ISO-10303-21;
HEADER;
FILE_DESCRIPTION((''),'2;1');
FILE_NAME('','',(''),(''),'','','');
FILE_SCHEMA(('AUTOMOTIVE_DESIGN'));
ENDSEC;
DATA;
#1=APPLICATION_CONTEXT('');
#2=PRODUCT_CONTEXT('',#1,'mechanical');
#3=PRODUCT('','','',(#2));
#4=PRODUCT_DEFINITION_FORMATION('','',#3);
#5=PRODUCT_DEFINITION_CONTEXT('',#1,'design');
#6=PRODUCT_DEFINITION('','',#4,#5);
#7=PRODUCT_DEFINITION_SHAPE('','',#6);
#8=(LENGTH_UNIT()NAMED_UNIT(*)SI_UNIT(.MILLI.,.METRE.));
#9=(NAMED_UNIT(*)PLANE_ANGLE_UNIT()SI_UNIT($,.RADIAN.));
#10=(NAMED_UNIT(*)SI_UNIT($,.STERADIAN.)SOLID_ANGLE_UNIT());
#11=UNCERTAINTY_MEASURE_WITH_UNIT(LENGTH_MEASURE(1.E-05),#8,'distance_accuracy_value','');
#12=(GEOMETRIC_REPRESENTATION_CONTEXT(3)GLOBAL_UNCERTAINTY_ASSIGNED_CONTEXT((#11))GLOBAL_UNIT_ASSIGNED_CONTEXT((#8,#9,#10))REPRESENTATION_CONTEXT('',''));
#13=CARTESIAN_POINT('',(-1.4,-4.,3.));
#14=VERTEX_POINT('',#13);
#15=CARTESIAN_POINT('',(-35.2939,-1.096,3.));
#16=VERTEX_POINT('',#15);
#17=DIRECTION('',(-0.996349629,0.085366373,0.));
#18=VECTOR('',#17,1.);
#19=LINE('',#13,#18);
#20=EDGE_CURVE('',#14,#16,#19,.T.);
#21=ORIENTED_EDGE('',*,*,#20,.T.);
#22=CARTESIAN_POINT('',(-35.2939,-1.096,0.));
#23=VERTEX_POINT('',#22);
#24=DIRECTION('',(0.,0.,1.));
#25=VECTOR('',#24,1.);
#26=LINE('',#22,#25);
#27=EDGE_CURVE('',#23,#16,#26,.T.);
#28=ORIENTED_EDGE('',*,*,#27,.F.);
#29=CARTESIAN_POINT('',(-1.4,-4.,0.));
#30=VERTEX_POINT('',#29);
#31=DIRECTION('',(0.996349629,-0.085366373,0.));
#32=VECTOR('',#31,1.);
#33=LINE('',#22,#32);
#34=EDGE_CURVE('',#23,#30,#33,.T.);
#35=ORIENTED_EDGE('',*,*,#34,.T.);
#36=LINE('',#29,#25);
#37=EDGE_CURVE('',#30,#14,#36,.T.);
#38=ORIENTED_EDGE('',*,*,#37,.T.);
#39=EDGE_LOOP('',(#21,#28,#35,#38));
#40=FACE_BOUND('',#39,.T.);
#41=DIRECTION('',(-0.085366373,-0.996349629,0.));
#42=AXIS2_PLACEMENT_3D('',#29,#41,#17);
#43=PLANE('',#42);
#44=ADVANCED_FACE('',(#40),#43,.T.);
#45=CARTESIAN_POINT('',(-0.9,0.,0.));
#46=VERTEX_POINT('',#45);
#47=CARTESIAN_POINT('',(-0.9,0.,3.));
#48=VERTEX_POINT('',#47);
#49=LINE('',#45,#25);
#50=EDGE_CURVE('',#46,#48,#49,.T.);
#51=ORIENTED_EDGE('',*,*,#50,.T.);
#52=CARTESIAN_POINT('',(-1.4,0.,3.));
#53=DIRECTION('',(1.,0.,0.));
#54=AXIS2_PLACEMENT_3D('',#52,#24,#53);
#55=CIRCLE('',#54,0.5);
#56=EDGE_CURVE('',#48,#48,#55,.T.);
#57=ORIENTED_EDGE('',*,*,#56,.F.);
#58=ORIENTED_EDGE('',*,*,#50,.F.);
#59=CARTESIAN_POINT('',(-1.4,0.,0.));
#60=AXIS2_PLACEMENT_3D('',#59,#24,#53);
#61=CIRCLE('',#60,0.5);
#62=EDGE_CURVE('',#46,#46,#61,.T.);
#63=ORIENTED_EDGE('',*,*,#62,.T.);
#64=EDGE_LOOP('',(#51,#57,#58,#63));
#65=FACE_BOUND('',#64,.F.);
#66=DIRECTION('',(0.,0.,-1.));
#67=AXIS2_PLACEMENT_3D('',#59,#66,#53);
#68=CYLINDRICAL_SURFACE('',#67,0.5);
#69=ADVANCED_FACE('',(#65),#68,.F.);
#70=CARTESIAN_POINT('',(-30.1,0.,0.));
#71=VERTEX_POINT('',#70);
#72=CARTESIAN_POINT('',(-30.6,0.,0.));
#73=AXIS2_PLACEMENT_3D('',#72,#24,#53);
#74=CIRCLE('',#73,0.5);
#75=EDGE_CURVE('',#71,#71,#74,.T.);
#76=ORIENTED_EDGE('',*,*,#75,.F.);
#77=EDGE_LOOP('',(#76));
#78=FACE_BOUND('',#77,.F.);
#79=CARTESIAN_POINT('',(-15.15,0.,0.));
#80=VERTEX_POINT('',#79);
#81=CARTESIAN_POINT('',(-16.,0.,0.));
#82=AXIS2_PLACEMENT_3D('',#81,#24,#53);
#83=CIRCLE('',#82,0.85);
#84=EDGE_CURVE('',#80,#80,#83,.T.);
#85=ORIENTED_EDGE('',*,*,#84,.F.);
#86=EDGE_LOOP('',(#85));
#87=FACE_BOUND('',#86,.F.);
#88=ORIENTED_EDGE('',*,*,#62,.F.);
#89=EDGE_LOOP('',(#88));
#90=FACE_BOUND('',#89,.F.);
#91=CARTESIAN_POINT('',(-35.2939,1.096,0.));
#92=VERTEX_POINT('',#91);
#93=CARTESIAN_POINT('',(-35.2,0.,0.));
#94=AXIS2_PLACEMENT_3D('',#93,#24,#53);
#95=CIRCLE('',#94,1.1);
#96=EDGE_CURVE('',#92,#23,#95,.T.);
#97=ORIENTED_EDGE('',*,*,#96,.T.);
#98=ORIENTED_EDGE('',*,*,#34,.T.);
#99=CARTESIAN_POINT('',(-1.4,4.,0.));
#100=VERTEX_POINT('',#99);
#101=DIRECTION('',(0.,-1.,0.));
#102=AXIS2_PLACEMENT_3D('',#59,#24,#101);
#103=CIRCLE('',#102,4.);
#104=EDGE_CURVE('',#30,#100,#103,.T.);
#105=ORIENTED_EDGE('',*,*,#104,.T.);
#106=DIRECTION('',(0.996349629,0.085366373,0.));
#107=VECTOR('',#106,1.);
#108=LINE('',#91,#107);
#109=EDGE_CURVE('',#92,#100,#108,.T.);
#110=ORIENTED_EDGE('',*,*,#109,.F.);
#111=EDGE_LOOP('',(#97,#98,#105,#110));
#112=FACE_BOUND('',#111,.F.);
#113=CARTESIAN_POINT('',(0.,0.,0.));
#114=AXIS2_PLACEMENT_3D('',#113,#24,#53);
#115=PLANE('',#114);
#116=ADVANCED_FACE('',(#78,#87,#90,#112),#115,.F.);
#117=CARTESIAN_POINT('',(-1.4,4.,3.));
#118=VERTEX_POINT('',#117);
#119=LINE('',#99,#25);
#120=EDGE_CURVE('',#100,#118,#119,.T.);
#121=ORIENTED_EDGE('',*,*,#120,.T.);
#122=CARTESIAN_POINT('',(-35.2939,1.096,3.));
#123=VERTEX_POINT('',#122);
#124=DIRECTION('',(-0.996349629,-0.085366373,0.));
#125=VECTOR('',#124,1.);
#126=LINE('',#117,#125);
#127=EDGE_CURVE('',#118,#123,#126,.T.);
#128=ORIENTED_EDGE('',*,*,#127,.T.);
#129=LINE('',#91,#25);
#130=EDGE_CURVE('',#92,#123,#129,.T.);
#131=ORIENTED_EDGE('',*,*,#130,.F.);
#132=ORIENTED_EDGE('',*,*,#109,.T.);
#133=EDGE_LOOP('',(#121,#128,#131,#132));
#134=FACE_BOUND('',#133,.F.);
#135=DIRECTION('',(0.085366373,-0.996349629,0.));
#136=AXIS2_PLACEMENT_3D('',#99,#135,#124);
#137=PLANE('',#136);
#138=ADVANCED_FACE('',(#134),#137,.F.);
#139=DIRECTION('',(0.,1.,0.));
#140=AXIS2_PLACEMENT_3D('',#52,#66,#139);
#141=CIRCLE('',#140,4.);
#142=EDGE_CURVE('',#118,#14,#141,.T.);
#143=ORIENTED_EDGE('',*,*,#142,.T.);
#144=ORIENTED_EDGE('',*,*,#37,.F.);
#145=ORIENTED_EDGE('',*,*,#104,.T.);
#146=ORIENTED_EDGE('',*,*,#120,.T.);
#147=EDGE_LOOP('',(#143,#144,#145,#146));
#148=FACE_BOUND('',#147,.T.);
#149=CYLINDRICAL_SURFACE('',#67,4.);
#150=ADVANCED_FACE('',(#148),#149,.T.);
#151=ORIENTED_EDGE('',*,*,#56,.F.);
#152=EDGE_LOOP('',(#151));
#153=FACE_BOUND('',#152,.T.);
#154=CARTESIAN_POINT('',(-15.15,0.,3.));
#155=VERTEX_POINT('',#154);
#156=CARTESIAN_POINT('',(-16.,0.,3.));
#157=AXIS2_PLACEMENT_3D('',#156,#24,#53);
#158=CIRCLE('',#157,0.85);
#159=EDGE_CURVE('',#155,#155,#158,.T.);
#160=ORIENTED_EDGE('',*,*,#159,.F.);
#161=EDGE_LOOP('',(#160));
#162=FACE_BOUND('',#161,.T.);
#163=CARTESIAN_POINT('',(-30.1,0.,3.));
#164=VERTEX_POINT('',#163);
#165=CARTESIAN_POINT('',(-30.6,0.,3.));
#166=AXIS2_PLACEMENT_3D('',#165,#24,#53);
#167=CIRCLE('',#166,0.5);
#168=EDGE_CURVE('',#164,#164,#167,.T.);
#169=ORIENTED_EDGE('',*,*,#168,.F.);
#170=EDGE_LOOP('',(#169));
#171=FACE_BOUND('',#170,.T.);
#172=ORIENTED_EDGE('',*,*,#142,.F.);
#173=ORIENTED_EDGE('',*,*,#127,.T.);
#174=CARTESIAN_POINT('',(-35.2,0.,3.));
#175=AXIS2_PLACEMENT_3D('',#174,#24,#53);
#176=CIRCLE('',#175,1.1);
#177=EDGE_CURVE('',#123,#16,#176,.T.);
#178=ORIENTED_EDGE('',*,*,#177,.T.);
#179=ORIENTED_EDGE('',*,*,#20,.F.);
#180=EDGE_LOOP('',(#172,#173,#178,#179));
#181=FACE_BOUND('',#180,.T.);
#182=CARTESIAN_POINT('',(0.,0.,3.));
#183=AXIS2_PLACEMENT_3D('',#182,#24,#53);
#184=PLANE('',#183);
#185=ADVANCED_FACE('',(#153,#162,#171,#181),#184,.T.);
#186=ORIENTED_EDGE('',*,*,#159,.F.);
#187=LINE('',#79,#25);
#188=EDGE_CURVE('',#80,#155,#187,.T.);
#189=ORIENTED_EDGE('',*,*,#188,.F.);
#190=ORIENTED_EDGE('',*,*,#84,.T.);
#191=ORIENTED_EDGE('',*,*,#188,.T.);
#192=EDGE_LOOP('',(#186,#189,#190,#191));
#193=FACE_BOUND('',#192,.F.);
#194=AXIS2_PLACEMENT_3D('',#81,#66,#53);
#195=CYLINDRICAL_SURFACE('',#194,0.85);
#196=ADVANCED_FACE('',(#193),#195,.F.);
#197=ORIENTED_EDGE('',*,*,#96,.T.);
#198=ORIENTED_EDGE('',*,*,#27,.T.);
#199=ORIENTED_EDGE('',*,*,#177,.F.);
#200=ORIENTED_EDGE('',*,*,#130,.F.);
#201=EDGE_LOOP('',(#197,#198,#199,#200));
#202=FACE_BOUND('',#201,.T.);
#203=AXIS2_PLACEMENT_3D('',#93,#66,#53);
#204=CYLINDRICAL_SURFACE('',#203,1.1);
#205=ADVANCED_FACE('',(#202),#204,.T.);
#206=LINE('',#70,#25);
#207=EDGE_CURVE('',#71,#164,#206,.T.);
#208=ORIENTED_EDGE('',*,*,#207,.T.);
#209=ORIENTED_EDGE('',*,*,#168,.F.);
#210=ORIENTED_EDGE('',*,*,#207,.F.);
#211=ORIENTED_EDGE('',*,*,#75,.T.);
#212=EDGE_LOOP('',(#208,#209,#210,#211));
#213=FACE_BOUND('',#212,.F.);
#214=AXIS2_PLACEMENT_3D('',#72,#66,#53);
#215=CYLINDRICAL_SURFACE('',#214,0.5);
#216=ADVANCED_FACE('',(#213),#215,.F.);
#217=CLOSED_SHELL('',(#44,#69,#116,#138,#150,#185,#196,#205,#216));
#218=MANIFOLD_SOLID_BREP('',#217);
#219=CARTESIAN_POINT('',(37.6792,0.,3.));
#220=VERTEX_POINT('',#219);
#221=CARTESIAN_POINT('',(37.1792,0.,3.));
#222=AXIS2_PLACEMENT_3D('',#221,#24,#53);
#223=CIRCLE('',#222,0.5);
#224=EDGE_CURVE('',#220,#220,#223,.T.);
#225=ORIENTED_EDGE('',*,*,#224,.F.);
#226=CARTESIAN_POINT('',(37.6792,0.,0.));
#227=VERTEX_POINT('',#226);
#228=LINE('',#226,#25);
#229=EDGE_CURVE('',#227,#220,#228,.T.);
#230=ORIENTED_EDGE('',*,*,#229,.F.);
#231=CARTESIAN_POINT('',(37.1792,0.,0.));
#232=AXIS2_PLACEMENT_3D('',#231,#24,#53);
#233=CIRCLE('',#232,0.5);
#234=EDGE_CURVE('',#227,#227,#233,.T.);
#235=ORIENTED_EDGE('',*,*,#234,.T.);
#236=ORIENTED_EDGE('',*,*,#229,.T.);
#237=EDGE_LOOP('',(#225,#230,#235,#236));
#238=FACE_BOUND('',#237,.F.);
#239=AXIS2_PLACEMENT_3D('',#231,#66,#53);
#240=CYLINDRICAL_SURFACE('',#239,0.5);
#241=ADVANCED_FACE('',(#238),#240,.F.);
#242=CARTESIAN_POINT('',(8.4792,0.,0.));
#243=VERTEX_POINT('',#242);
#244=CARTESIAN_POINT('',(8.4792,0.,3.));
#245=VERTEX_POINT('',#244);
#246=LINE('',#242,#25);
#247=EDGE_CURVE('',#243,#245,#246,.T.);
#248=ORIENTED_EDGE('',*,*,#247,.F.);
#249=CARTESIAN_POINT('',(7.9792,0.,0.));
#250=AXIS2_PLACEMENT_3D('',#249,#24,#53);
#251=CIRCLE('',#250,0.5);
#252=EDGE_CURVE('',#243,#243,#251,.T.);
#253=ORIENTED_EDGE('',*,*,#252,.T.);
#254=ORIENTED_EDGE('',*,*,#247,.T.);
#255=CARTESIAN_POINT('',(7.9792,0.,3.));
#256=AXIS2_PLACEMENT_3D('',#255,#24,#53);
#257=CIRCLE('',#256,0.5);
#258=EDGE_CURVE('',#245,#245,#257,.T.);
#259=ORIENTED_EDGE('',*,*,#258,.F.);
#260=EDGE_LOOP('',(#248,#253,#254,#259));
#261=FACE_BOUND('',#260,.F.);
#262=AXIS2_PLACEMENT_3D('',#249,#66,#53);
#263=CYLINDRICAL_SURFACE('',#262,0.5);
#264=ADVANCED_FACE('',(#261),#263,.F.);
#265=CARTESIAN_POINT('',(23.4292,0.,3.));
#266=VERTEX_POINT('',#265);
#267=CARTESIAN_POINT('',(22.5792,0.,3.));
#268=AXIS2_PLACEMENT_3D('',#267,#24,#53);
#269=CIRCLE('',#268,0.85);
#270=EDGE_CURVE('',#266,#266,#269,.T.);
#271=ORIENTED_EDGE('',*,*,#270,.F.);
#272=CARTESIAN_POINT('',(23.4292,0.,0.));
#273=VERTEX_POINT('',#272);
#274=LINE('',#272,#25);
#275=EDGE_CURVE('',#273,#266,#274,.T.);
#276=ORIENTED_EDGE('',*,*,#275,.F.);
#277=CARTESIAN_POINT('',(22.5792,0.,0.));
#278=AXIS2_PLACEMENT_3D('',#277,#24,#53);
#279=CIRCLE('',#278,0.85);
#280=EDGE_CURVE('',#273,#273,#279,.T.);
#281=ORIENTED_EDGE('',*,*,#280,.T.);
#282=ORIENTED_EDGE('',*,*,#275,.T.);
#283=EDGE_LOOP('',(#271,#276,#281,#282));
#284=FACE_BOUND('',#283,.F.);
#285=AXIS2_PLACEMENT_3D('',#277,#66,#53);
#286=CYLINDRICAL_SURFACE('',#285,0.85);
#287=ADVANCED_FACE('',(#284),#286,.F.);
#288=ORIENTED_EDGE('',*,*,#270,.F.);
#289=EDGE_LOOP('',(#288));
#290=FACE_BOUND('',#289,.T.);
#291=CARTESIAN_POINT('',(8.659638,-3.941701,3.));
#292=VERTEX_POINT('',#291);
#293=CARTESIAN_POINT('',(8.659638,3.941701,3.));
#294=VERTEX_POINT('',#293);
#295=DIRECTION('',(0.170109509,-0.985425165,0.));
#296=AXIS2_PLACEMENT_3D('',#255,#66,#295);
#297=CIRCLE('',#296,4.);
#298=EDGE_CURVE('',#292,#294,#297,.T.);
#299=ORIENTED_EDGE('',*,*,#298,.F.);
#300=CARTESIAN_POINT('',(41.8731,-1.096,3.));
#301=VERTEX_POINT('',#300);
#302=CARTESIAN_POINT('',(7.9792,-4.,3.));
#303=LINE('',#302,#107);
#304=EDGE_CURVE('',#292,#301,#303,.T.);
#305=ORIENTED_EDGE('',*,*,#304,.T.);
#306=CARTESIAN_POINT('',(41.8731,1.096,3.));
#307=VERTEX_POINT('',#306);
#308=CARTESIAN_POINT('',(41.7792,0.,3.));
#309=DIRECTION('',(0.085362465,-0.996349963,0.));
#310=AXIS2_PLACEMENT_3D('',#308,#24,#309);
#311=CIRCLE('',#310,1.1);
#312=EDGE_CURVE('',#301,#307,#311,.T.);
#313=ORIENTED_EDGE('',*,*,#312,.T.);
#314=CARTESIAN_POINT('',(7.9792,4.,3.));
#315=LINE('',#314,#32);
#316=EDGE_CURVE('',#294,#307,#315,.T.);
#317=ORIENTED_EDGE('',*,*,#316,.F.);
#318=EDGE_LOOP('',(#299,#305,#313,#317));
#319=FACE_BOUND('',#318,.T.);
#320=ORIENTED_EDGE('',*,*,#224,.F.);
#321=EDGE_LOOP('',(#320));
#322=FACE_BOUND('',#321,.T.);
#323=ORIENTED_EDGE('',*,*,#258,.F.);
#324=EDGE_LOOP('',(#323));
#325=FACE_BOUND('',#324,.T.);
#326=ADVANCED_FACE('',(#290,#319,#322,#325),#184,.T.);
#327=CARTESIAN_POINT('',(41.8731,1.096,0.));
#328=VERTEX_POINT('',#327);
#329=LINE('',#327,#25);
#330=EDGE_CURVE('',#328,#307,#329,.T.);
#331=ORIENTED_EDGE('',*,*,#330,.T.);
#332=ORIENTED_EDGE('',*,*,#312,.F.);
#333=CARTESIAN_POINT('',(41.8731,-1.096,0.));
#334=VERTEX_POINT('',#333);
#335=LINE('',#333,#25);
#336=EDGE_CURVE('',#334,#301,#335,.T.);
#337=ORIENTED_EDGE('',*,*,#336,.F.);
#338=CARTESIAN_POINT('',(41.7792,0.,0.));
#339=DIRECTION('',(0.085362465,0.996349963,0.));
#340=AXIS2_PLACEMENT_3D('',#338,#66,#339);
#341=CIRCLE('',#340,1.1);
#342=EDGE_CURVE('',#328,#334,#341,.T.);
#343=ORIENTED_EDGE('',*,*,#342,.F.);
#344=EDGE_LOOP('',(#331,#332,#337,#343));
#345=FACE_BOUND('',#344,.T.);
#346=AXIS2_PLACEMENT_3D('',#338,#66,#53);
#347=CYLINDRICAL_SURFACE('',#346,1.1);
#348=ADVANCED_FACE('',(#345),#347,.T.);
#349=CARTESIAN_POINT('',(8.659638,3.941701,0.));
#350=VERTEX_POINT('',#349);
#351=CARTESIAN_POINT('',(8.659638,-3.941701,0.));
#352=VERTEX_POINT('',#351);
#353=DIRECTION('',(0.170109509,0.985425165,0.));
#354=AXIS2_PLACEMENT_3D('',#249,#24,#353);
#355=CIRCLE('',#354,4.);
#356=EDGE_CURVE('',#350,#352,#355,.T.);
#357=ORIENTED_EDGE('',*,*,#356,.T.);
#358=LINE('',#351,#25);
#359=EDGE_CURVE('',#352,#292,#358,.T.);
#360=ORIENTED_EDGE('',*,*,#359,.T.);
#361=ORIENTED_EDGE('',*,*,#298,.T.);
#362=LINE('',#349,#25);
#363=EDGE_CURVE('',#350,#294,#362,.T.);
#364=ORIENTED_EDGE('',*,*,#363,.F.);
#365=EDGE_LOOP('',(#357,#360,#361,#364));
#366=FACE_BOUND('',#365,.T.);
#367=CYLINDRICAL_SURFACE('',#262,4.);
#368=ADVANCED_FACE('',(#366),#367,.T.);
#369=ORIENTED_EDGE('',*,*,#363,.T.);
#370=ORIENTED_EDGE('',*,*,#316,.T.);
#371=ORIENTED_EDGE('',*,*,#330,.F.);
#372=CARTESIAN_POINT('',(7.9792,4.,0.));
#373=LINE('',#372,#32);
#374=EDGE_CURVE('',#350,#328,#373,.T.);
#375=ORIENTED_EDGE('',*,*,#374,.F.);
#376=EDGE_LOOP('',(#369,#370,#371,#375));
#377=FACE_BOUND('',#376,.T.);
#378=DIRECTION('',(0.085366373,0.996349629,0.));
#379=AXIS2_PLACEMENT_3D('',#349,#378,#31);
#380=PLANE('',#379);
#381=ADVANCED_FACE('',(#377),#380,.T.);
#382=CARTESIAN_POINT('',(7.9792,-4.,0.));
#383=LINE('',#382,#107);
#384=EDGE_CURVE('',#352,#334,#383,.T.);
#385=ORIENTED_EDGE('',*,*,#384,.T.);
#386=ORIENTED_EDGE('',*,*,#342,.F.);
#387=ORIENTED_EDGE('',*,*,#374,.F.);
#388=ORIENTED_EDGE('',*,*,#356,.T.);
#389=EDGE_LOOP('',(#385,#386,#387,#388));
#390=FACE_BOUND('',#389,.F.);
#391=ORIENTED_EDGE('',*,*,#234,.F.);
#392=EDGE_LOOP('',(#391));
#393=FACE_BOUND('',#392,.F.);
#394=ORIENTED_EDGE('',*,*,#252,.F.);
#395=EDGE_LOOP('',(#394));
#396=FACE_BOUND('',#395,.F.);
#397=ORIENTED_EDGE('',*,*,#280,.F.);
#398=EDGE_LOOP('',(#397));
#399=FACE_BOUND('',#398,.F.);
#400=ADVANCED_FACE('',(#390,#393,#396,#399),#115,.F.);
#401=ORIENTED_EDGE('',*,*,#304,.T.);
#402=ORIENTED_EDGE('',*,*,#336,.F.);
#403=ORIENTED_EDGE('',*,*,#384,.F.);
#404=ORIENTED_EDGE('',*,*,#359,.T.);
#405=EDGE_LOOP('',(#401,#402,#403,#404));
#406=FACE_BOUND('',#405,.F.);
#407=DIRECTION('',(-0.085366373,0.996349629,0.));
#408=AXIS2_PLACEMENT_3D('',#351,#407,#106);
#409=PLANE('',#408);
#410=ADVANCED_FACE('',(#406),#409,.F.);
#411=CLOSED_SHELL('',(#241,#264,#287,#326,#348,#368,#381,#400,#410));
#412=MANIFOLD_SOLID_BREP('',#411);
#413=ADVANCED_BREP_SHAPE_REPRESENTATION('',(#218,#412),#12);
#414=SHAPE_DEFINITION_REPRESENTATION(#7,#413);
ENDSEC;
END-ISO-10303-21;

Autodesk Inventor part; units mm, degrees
ref_plane "YZ Plane" through (0, 0, 0) normal (1, 0, 0) x (0, 1, 0)
ref_plane "XZ Plane" through (0, 0, 0) normal (0, 1, 0) x (-1, 0, 0)
ref_plane "XY Plane" through (0, 0, 0) normal (0, 0, 1) x (1, 0, 0)
sketch "Sketch1" plane through (0, 0, 0) normal (0, 0, 1) x (1, 0, 0)
  circle A0 centre (-30.6, 0) radius 0.5
  circle A1 centre (-1.4, 0) radius 0.5
  circle A2 centre (22.5792, 0) radius 0.85
  circle A3 centre (7.9792, 0) radius 0.5
  circle A4 centre (37.1792, 0) radius 0.5
  circle A5 centre (-1.4, 0) radius 4
  circle A6 centre (7.9792, 0) radius 4
  circle A7 centre (-35.2, 0) radius 1.1
  circle A8 centre (41.7792, 0) radius 1.1
  line L0 (-1.4, 4) -> (-35.2939, 1.096)
  line L1 (-1.4, -4) -> (-35.2939, -1.096)
  line L2 (7.9792, 4) -> (41.8731, 1.096)
  line L3 (7.9792, -4) -> (41.8731, -1.096)
  circle A9 centre (-16, 0) radius 0.85
  dimension "d0" = 8
  dimension "d1" = 8
extrude "Extrusion1" add sketch "Sketch1" along normal blind 3 contours A5 L1 L0 | A5 L1 A7 L0 | A7 | L2 A6 L3 | A6 L2 | L3 A6 | L2 A8 L3 A6 | A8
properties part number "Eyebrows"
